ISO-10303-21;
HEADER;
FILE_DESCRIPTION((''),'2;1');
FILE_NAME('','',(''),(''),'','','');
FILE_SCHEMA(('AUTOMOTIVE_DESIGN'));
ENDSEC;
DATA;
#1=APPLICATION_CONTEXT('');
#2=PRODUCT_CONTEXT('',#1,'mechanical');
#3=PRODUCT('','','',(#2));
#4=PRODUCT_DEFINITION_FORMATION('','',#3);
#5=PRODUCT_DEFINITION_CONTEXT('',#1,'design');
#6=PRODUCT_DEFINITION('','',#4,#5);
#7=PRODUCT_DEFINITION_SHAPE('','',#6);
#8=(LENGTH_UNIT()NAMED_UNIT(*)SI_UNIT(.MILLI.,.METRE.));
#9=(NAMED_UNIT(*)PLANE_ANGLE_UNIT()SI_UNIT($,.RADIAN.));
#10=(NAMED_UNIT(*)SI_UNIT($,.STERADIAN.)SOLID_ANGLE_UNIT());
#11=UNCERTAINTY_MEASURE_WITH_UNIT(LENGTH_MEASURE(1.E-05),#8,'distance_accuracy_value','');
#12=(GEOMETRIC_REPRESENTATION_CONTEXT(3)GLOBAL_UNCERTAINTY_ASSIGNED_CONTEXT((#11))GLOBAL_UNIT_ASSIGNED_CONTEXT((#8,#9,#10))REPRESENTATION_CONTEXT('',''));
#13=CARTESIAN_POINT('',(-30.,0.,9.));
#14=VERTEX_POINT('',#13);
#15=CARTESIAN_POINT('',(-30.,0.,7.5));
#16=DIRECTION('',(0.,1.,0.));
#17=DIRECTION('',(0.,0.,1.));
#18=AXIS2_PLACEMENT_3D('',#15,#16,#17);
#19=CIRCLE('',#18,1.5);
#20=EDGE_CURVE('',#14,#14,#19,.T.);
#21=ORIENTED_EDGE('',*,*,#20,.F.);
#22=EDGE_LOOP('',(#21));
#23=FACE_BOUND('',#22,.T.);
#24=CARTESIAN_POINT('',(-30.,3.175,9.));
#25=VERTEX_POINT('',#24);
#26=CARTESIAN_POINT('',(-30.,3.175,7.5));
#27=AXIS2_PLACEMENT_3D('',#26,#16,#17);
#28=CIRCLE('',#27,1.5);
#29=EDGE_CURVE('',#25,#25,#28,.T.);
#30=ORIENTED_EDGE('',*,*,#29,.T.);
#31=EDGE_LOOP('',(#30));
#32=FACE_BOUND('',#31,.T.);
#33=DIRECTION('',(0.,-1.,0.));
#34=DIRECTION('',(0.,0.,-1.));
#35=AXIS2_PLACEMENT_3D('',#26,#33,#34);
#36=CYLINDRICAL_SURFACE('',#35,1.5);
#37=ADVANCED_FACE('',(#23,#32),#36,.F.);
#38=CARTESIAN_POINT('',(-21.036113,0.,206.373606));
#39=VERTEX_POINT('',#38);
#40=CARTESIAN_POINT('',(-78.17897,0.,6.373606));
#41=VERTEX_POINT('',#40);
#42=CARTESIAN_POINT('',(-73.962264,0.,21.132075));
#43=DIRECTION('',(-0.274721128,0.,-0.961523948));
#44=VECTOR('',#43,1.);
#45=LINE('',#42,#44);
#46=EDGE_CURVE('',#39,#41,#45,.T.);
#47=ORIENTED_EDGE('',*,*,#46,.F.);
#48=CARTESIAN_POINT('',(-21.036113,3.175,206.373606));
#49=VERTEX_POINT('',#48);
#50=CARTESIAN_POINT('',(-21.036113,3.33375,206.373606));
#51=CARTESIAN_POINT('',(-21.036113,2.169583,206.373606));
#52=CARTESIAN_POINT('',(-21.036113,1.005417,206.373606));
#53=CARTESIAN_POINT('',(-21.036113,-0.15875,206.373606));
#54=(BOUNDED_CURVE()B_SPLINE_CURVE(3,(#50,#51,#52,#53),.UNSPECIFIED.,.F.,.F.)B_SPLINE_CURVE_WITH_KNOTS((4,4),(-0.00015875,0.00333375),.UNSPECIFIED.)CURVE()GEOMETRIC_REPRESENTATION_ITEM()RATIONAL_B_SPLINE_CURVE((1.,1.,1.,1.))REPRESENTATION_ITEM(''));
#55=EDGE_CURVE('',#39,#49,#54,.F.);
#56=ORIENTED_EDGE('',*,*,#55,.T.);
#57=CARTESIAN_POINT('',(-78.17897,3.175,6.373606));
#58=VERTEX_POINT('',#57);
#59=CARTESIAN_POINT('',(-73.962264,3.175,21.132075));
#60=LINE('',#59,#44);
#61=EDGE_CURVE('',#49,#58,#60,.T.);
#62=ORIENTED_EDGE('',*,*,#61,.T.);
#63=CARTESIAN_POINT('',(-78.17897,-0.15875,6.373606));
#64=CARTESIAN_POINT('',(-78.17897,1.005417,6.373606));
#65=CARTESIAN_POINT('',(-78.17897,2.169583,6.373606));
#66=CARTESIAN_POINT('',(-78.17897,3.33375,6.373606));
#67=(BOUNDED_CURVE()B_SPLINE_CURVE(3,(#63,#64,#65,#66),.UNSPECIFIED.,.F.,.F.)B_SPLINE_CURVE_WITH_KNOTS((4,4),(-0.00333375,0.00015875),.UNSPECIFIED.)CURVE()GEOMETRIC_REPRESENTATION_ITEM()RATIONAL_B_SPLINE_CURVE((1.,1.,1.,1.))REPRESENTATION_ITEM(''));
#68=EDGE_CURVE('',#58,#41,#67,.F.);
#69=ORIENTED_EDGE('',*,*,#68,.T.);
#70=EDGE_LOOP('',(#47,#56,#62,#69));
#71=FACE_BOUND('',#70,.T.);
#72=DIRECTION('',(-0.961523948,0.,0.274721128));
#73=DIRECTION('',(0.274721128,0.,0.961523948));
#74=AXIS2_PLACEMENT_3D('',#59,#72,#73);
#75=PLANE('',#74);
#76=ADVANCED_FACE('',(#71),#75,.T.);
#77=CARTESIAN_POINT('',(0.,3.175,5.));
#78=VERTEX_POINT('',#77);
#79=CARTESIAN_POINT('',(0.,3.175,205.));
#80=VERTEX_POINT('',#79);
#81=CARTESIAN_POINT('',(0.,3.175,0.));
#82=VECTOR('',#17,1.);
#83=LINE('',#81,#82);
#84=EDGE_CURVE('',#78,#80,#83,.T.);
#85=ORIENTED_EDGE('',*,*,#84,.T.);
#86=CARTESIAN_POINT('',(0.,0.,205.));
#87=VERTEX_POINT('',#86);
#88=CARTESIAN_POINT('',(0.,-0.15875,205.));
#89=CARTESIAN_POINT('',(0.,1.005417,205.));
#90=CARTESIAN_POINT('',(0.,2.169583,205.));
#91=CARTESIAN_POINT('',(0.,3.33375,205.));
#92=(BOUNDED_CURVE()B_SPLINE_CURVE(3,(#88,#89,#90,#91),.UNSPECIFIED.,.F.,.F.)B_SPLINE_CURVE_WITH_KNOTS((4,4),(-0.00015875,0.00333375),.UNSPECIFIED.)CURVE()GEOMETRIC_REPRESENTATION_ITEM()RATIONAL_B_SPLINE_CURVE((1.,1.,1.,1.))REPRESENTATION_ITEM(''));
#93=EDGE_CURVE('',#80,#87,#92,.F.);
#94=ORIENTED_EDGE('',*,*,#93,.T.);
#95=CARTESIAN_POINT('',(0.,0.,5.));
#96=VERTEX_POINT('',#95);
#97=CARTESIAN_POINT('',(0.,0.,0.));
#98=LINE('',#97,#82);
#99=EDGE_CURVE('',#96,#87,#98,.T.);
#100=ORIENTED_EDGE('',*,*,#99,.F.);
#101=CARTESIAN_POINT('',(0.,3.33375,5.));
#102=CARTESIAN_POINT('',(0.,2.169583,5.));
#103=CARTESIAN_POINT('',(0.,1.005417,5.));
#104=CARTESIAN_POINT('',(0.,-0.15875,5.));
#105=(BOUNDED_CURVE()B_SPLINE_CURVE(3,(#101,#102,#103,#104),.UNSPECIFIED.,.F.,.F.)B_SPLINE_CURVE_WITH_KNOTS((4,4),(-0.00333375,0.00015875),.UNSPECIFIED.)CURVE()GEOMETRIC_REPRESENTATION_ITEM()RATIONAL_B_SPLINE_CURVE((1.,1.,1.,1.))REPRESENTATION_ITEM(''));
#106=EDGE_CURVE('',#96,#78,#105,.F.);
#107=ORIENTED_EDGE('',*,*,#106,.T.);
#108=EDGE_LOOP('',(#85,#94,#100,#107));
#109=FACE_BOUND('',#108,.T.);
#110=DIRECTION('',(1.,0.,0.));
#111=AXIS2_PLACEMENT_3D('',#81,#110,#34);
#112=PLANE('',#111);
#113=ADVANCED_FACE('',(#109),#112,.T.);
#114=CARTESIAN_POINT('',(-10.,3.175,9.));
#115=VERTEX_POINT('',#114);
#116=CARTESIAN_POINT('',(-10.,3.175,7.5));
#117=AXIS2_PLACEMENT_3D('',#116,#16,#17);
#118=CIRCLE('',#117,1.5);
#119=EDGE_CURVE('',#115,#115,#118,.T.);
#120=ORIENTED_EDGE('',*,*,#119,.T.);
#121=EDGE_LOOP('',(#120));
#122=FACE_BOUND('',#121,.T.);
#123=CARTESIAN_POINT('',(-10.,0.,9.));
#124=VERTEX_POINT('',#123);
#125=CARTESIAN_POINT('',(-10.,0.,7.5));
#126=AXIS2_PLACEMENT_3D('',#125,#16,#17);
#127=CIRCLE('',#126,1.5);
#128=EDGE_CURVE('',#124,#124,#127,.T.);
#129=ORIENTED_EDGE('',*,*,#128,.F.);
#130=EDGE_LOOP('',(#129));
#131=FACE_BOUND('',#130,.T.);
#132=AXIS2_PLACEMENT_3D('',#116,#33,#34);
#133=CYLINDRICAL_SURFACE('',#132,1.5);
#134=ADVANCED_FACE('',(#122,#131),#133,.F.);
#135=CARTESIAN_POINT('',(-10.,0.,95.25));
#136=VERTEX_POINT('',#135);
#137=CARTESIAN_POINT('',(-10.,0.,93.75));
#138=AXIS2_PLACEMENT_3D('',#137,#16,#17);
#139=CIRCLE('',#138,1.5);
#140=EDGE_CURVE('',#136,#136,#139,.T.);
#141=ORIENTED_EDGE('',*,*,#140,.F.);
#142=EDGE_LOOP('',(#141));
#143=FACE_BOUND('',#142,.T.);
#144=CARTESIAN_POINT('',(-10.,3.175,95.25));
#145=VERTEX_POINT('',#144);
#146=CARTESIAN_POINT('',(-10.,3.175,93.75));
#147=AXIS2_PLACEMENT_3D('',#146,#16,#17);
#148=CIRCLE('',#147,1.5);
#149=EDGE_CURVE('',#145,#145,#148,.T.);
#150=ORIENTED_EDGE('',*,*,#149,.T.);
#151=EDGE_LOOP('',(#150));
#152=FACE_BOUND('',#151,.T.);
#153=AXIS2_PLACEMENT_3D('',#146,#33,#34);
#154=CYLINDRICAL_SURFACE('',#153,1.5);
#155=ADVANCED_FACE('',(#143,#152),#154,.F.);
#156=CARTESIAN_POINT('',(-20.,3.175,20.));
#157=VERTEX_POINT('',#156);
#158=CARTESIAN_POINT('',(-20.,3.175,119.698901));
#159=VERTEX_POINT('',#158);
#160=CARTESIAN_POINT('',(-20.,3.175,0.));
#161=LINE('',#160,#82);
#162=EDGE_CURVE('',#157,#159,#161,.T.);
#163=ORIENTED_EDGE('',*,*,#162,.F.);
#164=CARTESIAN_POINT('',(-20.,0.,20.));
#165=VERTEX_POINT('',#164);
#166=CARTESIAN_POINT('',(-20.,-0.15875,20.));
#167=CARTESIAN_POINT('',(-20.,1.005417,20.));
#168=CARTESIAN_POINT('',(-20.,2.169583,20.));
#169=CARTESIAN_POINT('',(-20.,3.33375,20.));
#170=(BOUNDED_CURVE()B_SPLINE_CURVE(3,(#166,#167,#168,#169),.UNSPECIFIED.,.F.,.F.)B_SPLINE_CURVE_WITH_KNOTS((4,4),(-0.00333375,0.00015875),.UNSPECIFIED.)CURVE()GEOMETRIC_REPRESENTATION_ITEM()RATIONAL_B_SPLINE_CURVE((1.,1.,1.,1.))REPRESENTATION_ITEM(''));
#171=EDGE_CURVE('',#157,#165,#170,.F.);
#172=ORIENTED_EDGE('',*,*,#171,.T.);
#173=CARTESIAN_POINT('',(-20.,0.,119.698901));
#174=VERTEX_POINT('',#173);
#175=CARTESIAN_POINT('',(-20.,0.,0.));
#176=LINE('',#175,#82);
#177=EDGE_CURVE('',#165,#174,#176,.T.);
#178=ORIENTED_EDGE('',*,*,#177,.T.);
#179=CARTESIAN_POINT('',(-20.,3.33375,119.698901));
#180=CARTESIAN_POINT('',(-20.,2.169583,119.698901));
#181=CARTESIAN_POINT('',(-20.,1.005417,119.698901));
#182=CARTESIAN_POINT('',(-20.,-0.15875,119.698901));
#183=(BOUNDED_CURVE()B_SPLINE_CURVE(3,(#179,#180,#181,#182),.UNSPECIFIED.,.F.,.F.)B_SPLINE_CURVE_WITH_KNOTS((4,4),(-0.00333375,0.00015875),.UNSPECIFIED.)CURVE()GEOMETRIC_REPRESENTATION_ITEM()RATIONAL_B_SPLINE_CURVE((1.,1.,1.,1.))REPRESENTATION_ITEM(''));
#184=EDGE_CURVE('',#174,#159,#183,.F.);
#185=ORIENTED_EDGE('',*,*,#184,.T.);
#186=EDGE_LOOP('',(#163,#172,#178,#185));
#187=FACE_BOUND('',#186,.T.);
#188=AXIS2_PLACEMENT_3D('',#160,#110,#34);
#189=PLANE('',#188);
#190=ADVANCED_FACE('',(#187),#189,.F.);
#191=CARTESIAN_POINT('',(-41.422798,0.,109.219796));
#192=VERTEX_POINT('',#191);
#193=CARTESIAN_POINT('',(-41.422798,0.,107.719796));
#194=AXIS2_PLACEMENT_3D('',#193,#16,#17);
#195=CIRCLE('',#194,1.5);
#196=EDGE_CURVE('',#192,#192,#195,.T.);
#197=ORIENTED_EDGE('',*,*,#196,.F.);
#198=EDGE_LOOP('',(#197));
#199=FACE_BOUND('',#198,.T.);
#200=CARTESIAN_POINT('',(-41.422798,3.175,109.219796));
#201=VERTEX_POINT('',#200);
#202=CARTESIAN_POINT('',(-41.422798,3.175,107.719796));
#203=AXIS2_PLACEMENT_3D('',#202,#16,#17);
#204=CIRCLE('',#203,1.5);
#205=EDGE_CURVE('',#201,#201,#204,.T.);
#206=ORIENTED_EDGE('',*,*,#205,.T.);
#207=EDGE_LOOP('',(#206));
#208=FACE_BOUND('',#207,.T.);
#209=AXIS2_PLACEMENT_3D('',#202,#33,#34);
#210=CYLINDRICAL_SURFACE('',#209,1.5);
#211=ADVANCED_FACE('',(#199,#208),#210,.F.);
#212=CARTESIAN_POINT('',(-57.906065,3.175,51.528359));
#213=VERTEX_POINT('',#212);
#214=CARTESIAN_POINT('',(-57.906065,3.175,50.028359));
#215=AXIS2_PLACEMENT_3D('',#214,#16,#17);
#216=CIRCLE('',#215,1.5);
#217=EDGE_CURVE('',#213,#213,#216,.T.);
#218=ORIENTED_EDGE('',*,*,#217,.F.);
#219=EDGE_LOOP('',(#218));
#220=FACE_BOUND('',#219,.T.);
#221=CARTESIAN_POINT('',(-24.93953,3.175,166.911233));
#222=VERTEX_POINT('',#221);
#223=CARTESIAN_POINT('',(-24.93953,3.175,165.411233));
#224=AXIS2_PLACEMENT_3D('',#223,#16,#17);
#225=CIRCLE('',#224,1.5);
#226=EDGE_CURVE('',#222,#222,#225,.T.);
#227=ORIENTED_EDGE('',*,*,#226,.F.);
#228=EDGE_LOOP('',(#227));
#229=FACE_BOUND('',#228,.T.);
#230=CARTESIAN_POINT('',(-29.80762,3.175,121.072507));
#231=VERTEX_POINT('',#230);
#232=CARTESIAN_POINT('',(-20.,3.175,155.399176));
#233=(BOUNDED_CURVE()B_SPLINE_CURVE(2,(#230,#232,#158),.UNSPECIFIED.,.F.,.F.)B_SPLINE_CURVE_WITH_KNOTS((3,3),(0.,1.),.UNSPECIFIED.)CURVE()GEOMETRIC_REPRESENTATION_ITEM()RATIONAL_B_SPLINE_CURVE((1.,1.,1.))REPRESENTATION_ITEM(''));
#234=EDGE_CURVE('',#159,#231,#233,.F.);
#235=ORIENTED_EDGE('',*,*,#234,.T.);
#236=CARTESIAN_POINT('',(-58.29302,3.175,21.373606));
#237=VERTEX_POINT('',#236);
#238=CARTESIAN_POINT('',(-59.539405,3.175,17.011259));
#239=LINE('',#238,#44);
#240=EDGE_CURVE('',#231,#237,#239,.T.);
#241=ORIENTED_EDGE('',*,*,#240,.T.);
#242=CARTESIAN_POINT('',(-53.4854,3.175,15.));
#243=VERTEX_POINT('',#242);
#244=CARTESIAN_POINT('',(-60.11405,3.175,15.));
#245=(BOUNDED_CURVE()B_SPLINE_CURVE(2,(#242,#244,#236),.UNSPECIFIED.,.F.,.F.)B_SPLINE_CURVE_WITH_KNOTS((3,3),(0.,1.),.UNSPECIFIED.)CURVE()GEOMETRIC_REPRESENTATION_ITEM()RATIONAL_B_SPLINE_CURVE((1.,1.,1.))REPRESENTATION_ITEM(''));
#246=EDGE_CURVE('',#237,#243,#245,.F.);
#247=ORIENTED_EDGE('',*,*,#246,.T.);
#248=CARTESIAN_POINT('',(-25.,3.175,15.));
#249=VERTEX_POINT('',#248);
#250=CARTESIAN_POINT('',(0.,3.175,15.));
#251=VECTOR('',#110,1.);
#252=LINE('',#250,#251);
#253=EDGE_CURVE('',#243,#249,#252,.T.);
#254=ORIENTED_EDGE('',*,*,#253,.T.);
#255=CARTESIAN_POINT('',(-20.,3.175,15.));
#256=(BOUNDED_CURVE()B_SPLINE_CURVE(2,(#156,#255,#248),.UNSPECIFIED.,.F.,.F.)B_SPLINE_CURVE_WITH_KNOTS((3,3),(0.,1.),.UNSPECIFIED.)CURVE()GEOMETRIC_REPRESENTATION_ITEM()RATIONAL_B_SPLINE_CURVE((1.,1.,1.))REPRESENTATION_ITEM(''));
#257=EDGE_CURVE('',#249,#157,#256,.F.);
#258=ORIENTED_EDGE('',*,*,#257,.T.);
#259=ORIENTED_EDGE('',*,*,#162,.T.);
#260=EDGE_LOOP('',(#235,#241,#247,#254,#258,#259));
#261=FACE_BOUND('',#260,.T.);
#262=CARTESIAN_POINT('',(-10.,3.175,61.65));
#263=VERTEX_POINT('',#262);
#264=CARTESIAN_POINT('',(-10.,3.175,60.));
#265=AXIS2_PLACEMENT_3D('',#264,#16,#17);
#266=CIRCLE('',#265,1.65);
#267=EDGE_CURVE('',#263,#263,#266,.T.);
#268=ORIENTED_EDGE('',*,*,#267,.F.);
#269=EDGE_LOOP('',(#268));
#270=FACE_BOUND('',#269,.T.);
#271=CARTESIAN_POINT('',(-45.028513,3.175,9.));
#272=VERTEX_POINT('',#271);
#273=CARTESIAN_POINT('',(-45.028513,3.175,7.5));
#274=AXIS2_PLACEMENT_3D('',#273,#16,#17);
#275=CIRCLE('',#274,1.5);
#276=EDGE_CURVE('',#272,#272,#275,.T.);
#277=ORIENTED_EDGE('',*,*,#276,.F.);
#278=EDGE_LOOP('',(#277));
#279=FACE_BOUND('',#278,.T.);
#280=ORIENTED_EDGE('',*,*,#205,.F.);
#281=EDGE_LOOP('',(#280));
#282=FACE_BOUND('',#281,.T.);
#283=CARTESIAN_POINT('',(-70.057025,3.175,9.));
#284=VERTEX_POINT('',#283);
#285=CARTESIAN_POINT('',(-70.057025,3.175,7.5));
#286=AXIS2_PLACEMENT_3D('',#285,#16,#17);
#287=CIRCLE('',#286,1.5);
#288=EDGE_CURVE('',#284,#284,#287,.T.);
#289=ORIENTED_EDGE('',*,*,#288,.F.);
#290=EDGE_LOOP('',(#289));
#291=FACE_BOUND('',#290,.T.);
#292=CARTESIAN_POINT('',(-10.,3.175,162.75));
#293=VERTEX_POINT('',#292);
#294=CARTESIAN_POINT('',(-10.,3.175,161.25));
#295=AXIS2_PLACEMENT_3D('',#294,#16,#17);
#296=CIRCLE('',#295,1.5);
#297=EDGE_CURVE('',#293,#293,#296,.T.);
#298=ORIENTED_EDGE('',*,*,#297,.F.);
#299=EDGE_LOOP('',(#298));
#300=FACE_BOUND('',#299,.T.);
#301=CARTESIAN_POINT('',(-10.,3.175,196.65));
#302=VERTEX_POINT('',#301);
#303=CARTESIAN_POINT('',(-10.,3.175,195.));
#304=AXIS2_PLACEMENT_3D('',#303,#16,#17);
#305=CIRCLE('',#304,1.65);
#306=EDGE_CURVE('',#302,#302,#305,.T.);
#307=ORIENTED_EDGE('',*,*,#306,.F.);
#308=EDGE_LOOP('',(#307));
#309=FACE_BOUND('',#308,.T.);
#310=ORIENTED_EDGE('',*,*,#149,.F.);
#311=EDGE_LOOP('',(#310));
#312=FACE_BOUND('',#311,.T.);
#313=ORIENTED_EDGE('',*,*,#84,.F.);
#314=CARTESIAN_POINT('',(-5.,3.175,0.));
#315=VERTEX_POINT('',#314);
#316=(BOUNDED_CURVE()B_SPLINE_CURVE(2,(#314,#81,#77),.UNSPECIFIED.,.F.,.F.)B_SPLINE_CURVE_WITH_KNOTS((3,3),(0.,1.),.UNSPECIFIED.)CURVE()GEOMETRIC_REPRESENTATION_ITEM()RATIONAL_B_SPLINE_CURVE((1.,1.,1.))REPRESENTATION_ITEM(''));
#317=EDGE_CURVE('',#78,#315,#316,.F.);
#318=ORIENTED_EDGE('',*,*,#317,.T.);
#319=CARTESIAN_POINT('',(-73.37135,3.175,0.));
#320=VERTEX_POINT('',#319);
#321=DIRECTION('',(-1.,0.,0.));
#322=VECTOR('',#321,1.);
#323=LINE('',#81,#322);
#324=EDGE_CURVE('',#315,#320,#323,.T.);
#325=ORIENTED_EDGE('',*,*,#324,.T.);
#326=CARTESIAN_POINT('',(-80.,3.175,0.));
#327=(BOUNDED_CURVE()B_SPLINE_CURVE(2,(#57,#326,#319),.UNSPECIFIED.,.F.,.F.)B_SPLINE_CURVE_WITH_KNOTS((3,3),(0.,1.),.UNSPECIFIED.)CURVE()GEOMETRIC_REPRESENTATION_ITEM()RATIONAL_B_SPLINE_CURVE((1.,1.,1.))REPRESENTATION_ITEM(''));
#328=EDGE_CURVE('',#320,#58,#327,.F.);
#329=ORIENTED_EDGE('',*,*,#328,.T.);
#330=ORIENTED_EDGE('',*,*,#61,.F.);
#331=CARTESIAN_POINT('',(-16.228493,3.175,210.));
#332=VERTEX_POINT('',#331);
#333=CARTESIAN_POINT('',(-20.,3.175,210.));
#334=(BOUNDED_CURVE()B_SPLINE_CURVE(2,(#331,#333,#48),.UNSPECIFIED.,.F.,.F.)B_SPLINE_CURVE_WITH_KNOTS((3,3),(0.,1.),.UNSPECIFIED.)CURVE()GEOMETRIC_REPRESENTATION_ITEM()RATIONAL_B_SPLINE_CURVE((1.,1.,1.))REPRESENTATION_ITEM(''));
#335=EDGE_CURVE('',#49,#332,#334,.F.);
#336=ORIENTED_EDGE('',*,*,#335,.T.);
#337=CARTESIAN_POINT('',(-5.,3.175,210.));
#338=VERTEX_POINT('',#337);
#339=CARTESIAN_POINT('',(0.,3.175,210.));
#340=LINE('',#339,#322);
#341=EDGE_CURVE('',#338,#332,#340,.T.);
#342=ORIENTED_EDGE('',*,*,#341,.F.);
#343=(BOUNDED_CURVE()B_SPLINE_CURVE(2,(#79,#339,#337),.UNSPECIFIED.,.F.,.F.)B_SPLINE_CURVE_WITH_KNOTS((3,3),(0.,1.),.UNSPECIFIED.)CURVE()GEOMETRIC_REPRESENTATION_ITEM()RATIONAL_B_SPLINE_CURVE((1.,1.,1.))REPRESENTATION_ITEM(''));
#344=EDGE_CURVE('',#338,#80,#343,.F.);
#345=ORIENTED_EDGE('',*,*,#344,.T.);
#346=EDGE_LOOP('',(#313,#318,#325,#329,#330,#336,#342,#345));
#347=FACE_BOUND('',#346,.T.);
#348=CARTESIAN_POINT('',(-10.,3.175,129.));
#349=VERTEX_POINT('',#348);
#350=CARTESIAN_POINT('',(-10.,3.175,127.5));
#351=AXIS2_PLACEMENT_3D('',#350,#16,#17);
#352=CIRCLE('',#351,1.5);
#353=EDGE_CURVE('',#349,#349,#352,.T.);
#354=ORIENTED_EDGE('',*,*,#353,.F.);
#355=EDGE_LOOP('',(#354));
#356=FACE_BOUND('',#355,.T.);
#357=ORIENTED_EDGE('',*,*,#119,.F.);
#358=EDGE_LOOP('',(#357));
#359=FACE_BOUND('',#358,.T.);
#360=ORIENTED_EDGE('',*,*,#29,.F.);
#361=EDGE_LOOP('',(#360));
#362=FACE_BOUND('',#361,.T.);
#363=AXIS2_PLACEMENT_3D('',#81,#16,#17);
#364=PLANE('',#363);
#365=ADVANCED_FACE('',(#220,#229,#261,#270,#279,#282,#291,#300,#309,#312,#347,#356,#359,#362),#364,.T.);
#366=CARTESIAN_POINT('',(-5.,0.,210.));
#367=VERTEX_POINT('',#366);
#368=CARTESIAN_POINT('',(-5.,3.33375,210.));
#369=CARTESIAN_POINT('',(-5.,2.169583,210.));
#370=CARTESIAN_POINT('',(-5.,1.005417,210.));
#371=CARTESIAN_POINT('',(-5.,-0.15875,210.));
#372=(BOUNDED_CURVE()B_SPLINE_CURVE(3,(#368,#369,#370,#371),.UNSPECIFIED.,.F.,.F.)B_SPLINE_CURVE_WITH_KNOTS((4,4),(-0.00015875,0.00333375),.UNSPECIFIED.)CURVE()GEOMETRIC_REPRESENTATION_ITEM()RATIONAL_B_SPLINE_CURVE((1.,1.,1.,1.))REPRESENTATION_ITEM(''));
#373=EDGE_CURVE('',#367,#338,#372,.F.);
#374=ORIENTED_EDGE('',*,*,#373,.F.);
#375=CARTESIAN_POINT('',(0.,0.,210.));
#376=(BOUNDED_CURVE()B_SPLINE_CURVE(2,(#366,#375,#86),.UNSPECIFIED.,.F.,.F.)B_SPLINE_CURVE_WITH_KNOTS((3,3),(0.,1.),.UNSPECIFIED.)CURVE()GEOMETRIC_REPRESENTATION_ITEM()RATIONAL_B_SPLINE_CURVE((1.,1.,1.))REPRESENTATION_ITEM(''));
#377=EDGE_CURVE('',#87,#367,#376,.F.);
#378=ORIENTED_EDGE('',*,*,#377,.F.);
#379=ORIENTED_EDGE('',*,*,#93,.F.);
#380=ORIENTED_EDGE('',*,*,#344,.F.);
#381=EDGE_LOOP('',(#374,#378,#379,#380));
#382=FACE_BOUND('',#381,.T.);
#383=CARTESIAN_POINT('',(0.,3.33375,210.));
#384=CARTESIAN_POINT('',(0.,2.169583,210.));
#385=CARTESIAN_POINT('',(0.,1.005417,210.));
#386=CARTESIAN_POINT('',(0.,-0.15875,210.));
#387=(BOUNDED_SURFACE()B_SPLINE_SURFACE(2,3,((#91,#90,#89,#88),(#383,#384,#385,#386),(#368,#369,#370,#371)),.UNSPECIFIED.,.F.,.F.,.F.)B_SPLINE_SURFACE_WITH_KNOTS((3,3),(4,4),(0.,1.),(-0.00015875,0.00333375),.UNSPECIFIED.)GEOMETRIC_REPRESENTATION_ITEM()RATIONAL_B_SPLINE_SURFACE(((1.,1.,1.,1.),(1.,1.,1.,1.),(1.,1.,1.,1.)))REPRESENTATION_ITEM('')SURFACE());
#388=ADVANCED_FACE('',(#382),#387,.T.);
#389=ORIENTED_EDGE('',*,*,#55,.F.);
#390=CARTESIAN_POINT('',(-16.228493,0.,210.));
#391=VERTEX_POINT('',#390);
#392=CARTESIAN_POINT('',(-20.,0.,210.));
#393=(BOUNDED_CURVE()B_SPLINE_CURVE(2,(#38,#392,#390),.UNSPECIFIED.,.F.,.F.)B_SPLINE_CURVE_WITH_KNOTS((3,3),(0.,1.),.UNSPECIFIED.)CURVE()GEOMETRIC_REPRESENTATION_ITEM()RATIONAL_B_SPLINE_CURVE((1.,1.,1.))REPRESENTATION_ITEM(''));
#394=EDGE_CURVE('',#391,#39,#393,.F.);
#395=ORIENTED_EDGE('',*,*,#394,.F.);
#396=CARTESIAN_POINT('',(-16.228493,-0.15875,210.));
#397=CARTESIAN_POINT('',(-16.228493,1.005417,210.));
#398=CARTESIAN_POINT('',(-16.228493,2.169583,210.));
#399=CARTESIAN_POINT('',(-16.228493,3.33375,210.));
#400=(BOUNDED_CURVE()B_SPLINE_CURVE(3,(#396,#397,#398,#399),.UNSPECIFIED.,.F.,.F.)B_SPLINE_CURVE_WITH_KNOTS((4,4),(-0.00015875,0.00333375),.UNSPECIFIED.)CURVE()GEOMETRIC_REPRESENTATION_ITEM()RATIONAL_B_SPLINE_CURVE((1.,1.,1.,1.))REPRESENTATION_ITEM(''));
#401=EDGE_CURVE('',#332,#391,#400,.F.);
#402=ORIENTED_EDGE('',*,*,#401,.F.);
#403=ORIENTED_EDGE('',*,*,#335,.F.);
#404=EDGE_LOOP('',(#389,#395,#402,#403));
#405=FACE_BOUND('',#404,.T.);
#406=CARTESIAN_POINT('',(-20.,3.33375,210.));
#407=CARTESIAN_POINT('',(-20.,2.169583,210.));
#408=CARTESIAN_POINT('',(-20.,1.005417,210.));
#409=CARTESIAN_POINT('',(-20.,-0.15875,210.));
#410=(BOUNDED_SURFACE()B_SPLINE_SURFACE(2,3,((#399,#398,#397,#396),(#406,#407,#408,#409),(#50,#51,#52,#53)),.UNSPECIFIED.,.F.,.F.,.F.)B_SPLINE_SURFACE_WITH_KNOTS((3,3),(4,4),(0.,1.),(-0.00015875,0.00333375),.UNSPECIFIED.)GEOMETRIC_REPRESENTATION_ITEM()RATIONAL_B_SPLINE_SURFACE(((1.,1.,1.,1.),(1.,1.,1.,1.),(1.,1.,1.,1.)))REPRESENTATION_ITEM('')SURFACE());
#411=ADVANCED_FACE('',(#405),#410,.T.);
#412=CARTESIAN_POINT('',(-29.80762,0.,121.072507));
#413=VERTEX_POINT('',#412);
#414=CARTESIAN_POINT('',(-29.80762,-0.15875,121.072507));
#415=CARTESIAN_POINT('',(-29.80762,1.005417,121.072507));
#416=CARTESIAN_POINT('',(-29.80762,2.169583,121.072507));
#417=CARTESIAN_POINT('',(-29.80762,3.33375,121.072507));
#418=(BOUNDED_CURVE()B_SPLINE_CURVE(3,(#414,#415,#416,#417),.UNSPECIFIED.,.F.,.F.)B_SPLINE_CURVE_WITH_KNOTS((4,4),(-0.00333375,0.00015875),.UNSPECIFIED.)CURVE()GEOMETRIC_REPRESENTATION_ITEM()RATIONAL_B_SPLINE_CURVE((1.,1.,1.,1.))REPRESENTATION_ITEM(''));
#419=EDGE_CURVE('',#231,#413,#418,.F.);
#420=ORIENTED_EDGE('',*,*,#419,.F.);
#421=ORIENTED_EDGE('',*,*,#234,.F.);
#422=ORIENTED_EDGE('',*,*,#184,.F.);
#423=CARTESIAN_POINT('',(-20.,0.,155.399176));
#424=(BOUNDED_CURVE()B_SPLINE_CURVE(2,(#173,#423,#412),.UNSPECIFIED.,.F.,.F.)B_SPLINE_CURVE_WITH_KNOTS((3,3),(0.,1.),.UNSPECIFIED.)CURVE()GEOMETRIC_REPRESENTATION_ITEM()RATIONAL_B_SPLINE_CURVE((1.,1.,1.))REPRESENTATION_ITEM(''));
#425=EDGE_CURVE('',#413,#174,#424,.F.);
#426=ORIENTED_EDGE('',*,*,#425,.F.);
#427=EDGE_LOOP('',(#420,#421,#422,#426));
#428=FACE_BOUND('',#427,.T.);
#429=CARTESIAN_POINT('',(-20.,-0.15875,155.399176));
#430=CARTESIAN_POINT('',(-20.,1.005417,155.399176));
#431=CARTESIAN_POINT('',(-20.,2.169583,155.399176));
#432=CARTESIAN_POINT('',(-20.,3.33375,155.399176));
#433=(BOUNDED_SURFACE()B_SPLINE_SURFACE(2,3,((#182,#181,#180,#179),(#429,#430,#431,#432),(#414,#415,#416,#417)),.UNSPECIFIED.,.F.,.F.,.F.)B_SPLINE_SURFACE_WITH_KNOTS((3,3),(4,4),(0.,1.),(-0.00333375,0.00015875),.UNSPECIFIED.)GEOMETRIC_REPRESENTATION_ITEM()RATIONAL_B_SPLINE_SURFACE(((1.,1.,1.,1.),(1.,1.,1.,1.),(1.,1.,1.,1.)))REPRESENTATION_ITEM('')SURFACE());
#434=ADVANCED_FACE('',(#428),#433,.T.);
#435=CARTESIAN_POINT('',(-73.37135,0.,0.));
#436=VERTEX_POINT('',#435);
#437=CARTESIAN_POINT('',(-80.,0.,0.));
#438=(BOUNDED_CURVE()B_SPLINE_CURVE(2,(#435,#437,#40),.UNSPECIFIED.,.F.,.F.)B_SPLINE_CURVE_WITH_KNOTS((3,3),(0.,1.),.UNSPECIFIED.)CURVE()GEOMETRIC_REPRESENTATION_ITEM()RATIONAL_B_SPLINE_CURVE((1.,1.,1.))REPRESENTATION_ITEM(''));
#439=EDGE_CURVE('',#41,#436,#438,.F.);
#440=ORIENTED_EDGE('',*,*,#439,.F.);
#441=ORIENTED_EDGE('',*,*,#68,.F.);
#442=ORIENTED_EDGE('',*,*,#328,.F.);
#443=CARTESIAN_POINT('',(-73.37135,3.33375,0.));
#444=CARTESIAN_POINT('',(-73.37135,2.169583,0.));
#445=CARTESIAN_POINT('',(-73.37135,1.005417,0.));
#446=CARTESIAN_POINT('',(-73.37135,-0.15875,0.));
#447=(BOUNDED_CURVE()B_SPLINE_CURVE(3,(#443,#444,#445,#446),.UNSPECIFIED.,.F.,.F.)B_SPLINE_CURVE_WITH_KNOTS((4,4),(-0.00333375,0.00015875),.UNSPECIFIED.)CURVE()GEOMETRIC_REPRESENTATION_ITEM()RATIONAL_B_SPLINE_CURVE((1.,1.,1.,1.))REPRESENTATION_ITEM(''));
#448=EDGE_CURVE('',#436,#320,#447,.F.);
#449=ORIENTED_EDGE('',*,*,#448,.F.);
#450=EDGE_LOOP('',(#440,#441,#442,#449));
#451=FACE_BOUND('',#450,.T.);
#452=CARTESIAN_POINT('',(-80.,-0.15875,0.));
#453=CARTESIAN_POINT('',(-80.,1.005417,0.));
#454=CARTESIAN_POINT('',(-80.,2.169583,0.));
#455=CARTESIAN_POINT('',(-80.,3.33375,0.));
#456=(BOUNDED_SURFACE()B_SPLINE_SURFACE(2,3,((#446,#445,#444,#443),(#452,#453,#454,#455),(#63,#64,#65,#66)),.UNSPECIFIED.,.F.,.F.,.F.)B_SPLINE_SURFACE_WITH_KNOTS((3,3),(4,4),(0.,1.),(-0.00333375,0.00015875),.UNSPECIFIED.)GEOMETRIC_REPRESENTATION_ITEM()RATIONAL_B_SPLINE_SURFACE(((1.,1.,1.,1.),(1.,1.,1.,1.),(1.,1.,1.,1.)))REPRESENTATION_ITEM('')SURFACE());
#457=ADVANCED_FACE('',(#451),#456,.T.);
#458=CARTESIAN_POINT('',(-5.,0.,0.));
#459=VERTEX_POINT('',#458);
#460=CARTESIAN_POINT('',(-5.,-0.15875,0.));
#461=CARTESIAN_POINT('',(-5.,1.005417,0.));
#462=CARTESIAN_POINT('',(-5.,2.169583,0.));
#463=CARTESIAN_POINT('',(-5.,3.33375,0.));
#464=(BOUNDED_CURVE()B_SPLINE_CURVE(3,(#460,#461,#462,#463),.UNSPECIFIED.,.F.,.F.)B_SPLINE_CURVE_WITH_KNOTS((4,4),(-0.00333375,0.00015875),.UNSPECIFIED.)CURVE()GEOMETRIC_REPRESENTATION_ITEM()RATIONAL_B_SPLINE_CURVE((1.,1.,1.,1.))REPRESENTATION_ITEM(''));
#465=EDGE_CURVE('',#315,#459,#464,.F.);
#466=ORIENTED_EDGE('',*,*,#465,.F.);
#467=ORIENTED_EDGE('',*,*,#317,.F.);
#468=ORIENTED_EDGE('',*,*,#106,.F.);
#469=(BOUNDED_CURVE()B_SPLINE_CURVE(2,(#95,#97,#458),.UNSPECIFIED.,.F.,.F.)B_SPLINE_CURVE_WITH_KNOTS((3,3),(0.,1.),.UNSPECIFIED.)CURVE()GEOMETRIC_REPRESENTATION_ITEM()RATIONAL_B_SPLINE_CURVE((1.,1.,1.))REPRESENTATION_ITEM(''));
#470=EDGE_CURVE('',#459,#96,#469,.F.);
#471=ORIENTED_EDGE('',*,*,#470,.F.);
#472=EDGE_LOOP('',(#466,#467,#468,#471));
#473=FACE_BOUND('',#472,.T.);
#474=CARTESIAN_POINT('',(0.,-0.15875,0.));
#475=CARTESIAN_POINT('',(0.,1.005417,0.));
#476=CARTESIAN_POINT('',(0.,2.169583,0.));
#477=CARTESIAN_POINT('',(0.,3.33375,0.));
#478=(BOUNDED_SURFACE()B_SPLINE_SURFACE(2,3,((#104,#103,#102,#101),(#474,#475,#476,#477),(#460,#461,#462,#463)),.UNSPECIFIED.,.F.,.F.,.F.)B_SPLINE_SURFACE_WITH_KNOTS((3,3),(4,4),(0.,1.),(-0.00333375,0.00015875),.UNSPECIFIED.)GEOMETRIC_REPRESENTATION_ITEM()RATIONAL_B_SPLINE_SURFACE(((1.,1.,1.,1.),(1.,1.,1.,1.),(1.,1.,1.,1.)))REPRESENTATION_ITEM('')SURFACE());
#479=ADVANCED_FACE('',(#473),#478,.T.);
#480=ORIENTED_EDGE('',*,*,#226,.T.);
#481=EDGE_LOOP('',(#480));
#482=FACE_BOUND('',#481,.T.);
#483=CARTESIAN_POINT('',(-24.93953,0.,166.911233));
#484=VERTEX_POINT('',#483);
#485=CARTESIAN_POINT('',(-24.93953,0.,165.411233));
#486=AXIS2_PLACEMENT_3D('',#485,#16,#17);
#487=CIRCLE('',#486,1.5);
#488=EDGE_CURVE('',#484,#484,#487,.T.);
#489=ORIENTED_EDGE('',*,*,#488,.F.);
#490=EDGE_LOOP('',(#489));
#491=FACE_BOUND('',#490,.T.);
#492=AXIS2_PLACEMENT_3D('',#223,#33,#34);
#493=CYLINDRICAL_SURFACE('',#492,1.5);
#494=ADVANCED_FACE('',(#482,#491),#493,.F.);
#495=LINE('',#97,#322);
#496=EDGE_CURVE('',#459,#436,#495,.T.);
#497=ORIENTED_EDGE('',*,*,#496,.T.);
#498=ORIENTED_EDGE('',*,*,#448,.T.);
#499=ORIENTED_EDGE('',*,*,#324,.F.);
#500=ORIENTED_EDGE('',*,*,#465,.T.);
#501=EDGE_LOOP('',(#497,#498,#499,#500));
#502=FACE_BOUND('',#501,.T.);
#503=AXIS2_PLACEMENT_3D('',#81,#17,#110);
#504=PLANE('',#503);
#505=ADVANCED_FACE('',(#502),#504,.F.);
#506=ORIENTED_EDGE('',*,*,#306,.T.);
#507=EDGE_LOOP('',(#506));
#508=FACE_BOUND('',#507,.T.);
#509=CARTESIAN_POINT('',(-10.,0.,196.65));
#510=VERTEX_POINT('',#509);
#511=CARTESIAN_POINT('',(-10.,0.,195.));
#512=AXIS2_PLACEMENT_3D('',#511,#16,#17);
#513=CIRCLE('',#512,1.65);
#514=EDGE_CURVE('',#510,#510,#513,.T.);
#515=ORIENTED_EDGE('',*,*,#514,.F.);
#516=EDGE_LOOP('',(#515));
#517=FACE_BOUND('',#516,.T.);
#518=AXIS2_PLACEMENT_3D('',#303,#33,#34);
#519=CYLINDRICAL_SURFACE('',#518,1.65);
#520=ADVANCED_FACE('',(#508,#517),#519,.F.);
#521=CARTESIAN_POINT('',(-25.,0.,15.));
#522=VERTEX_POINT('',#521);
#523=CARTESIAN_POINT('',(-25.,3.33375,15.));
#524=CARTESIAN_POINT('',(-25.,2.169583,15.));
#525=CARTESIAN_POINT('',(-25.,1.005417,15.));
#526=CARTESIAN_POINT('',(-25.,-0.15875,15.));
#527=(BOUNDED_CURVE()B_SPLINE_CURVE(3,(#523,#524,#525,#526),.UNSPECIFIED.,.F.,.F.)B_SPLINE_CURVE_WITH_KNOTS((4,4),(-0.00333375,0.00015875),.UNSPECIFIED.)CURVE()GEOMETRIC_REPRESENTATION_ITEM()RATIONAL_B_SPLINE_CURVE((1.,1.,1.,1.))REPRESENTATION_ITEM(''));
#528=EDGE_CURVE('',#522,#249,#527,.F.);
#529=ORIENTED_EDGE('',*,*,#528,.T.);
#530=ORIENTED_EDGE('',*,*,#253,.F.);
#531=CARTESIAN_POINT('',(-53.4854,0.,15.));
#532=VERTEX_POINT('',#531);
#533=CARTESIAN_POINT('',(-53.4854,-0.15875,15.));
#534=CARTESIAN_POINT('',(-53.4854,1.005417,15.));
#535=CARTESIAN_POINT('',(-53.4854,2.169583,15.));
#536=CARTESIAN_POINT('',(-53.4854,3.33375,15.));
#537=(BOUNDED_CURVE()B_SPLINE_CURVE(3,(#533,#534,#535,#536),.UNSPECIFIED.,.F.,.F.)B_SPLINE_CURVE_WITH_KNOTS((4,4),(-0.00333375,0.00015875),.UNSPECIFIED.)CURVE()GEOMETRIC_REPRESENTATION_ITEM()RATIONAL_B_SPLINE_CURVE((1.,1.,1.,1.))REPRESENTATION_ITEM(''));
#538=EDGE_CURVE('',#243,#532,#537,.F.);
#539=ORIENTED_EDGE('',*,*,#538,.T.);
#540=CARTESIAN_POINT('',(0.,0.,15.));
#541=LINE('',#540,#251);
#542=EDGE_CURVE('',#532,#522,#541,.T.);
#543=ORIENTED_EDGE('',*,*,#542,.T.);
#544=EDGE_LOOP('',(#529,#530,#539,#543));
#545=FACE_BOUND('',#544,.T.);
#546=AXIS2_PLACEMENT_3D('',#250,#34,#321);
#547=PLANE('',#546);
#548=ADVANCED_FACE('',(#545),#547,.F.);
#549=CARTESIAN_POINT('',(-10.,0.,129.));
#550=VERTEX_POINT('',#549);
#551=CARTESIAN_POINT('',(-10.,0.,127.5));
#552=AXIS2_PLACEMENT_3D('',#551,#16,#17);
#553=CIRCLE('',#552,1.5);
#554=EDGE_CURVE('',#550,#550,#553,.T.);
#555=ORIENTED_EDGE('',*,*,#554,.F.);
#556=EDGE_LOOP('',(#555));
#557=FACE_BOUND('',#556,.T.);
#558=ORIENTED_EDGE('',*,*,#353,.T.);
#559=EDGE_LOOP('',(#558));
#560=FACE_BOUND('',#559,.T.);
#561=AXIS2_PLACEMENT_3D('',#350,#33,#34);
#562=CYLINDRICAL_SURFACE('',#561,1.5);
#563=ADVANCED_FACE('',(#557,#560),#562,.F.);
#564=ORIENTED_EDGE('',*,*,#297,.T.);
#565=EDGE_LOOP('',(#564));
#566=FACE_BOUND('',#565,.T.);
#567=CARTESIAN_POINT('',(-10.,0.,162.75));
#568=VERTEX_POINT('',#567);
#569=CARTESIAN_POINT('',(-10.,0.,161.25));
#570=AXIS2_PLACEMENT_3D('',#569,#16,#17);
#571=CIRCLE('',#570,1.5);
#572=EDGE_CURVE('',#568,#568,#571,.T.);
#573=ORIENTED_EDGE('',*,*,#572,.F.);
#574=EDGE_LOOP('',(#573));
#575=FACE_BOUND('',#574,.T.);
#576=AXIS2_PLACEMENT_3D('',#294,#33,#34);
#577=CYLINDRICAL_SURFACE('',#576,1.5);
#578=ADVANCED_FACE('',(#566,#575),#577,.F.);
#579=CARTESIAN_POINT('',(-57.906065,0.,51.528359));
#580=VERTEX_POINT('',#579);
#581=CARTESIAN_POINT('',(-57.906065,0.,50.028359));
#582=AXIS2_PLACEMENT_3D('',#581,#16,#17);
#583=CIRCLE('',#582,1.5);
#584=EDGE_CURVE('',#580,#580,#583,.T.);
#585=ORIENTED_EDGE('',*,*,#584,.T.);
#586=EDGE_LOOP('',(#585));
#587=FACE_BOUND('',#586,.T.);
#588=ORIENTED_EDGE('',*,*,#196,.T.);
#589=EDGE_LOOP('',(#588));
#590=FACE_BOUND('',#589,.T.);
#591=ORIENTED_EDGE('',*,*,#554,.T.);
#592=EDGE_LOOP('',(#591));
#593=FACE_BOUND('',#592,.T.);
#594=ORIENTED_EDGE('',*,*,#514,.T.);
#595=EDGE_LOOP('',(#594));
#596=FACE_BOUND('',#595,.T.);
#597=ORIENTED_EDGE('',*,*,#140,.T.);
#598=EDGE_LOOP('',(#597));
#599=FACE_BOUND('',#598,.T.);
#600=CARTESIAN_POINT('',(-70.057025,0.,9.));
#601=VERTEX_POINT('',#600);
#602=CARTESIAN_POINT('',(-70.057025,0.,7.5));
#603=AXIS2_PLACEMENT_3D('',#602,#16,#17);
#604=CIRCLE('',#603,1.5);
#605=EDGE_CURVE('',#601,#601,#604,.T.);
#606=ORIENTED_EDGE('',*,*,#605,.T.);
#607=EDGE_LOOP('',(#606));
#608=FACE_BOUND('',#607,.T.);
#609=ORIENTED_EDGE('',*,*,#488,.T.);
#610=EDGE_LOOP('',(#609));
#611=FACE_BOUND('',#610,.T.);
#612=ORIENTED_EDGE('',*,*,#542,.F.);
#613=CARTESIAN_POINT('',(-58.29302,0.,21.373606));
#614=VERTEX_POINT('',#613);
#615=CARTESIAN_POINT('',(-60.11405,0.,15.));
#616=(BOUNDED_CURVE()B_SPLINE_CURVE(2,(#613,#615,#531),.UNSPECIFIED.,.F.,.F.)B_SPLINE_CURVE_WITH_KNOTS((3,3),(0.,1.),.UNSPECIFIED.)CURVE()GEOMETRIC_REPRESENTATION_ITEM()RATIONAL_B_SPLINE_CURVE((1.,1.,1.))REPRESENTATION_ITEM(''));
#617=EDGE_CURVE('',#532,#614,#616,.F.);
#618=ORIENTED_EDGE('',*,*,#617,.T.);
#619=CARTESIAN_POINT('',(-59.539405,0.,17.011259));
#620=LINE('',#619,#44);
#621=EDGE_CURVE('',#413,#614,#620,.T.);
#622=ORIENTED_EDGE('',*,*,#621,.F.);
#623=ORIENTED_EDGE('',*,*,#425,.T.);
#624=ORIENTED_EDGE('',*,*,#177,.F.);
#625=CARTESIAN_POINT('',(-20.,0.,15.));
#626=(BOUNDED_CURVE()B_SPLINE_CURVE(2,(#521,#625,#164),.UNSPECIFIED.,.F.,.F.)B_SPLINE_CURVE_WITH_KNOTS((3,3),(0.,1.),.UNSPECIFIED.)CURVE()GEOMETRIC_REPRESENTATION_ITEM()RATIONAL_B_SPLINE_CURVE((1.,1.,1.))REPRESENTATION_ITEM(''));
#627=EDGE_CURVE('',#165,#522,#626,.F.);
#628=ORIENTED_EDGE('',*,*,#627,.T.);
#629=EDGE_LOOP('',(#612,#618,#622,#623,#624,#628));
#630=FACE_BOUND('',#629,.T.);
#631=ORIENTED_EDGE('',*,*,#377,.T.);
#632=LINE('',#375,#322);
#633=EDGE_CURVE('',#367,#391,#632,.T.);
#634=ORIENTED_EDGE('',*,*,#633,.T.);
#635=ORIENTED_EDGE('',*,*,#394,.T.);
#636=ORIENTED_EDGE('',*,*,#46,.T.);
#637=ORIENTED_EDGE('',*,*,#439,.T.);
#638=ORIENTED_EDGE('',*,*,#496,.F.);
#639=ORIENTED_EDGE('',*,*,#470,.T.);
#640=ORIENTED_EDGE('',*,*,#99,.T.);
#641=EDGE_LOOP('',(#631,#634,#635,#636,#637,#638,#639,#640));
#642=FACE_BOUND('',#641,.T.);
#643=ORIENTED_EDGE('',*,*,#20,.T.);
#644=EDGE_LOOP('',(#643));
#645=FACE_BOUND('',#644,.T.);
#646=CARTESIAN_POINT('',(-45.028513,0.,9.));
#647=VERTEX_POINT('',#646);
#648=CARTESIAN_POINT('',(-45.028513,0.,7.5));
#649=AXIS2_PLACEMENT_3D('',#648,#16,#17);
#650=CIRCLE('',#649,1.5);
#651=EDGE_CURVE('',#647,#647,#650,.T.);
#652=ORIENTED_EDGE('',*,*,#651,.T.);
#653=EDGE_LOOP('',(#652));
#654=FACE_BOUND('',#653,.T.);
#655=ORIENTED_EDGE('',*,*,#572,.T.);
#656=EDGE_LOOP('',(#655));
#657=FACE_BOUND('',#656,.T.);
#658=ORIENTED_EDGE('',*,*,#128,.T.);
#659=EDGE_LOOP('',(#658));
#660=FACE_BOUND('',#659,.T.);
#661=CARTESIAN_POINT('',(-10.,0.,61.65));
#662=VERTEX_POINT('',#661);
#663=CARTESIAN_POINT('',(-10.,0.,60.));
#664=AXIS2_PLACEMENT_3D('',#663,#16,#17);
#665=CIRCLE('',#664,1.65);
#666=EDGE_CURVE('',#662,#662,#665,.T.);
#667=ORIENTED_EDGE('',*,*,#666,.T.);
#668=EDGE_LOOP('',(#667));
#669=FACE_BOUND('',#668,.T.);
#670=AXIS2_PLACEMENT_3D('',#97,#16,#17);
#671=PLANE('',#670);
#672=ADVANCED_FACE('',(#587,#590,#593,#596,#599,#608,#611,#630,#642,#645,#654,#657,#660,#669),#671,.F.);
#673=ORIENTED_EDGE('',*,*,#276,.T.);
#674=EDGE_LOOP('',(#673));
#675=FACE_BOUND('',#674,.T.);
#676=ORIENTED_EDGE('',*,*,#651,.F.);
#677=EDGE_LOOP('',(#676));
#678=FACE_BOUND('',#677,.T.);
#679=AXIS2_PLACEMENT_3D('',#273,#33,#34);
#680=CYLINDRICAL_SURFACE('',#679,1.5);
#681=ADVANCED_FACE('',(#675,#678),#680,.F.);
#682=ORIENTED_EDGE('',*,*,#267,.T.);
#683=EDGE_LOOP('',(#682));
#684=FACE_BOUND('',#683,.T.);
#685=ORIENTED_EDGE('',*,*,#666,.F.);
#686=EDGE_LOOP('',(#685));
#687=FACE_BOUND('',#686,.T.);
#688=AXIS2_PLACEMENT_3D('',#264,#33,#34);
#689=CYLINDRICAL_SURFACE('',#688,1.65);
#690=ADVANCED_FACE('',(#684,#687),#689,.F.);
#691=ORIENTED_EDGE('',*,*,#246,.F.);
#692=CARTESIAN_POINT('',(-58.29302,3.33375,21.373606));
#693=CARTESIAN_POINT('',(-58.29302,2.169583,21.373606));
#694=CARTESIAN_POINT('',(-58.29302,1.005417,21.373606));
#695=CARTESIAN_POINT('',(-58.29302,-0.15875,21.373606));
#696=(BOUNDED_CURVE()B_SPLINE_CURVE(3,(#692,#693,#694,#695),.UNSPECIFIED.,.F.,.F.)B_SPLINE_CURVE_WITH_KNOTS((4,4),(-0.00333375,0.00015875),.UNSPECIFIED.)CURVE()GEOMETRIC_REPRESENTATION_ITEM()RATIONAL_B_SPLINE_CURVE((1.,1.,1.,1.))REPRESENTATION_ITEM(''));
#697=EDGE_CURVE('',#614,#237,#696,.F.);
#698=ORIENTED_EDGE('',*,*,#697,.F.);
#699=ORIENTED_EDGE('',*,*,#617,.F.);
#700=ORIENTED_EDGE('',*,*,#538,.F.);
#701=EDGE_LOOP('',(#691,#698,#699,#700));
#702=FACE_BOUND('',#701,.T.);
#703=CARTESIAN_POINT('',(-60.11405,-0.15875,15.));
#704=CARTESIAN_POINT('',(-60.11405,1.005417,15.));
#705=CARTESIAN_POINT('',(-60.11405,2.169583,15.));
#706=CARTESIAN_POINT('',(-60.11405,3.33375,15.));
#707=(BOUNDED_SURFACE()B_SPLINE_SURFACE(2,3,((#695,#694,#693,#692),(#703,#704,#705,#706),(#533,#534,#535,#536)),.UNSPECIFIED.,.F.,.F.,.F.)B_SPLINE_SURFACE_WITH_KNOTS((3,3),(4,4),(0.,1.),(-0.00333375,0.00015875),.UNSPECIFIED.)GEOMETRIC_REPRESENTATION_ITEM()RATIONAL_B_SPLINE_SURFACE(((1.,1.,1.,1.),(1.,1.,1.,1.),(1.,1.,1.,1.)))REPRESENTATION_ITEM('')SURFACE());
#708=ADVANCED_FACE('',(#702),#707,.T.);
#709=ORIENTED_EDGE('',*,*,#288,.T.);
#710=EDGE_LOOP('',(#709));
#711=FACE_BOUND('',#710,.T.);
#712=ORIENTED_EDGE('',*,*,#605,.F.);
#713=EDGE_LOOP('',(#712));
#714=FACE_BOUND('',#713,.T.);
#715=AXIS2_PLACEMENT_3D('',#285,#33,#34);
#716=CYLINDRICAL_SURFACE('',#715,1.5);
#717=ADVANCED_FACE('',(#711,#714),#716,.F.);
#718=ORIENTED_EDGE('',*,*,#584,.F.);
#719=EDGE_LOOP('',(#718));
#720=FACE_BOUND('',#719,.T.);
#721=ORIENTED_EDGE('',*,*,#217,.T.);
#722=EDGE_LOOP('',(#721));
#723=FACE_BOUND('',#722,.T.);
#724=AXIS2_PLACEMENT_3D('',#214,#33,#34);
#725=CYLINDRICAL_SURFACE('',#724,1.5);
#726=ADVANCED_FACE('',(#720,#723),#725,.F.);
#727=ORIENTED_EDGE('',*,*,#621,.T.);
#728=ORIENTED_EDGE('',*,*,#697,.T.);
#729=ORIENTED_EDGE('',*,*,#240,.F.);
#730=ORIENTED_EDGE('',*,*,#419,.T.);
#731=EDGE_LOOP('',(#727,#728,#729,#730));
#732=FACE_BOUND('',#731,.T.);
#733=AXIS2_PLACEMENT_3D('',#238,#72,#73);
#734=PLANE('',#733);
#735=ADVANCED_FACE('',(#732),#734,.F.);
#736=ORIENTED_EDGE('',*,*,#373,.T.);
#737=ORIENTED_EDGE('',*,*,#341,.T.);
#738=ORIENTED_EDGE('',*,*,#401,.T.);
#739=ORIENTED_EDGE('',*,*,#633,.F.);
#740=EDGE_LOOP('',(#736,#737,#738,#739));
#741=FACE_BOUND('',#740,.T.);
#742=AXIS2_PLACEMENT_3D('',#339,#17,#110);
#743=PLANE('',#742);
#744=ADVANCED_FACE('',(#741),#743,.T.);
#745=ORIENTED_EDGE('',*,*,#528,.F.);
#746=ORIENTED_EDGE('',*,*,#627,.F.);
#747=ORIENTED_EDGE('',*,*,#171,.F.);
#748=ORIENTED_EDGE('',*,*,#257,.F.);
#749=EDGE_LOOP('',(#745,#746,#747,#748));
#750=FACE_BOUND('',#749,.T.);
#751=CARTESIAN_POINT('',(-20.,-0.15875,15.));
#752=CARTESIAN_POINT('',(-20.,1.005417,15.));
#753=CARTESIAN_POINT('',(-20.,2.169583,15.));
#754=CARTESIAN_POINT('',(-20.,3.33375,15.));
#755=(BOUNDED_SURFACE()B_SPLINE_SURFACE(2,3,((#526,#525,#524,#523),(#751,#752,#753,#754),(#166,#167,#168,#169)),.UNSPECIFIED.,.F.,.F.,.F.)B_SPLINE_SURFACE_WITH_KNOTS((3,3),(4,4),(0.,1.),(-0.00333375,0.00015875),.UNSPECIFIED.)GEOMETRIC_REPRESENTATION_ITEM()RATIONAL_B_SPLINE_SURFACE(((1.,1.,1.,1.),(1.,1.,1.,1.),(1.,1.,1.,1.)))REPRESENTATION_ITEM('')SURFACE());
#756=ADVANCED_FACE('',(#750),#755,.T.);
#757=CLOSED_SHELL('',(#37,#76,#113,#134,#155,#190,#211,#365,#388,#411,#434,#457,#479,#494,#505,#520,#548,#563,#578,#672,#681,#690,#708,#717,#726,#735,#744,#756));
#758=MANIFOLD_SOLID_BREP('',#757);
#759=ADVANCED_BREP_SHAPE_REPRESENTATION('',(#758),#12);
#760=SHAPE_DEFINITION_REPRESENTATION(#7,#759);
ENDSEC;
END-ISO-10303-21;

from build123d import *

# Parameters (mm, degrees)
SKETCH1_R           = 1.5
SKETCH1_R_2         = 1.65
BOSS_EXTRUDE1_DEPTH = 3.175
FILLET1_SIZE        = 5


with BuildPart() as part:
    # Sketch1 → Boss-Extrude1 (new body)
    with BuildSketch(Plane(origin=(0, 0, 0), x_dir=(1, 0, 0), z_dir=(0, 1, 0))):
        Polygon((-20, -210), (0, -210), (0, 0), (-80, 0), align=None)
        with Locations(Location((-41.422797756, -107.71979577, 0), (0, 0, 270))):
            Circle(SKETCH1_R, mode=Mode.SUBTRACT)
        with Locations(Location((-24.939530082, -165.411232629, 0), (0, 0, 270))):
            Circle(SKETCH1_R, mode=Mode.SUBTRACT)
        with Locations(Location((-10, -195, 0), (0, 0, 270))):
            Circle(SKETCH1_R_2, mode=Mode.SUBTRACT)
        with BuildLine():
            ThreePointArc((-10, -159.75), (-8.5, -161.25), (-10, -162.75))
            ThreePointArc((-10, -162.75), (-11.5, -161.25), (-10, -159.75))
        make_face(mode=Mode.SUBTRACT)
        with BuildLine():
            ThreePointArc((-10, -126), (-8.5, -127.5), (-10, -129))
            ThreePointArc((-10, -129), (-11.5, -127.5), (-10, -126))
        make_face(mode=Mode.SUBTRACT)
        Polygon((-20, -15), (-20, -155.39917583), (-60.114050237, -15), align=None, mode=Mode.SUBTRACT)
        with Locations(Location((-57.90606543, -50.028358912, 0), (0, 0, 270))):
            Circle(SKETCH1_R, mode=Mode.SUBTRACT)
        with Locations(Location((-70.057025119, -7.5, 0), (0, 0, 270))):
            Circle(SKETCH1_R, mode=Mode.SUBTRACT)
        with Locations(Location((-45.028512559, -7.5, 0), (0, 0, 270))):
            Circle(SKETCH1_R, mode=Mode.SUBTRACT)
        with BuildLine():
            ThreePointArc((-10, -92.25), (-8.5, -93.75), (-10, -95.25))
            ThreePointArc((-10, -95.25), (-11.5, -93.75), (-10, -92.25))
        make_face(mode=Mode.SUBTRACT)
        with Locations(Location((-10, -60, 0), (0, 0, 270))):
            Circle(SKETCH1_R_2, mode=Mode.SUBTRACT)
        with Locations(Location((-30, -7.5, 0), (0, 0, 270))):
            Circle(SKETCH1_R, mode=Mode.SUBTRACT)
        with Locations(Location((-10, -7.5, 0), (0, 0, 270))):
            Circle(SKETCH1_R, mode=Mode.SUBTRACT)
    extrude(amount=BOSS_EXTRUDE1_DEPTH)

    # Fillet1
    # a fillet whose section is not a circle: 5 mm, written as the material it adds along each edge
    with BuildSketch(Plane(origin=(-20, 0, 15), x_dir=(0, 0, 1), z_dir=(0, 1, 0))) as fillet1_piece_1:
        with BuildLine():
            Bezier((FILLET1_SIZE, 0), (0, 0), (0, -FILLET1_SIZE), weights=[1, 1, 1])
            Line((0, -FILLET1_SIZE), (0, 0))
            Line((0, 0), (FILLET1_SIZE, 0))
        make_face()
    extrude(amount=3.175)
    with BuildSketch(Plane(origin=(-60.114050237, 0, 15), x_dir=(0.2747211278973786, 0, 0.9615239476408229), z_dir=(0, 1, 0))) as fillet1_piece_2:
        with BuildLine():
            Bezier((6.628649921, 0), (0, 0), (1.821030183, 6.373605639), weights=[1, 1, 1])
            Line((1.821030183, 6.373605639), (0, 0))
            Line((0, 0), (6.628649921, 0))
        make_face()
    extrude(amount=3.175)
    with BuildSketch(Plane(origin=(-20, 0, 155.39917583), x_dir=(-0.274721127897378, 0, -0.961523947640823), z_dir=(0, 1, 0))) as fillet1_piece_3:
        with BuildLine():
            Bezier((35.700274723, 0), (0, 0), (34.326669084, -9.807619738), weights=[1, 1, 1])
            Line((34.326669084, -9.807619738), (0, 0))
            Line((0, 0), (35.700274723, 0))
        make_face()
    extrude(amount=3.175)
    # a fillet whose section is not a circle: 5 mm, written as the material it takes off along each edge
    with BuildSketch(Plane(origin=(-80, -16.571624802, 0), x_dir=(0.2747211278973785, 0, 0.9615239476408229), z_dir=(0, 1, 0))) as fillet1_2_piece_1:
        with BuildLine():
            Bezier((6.628649921, 0), (0, 0), (1.821030183, 6.373605639), weights=[1, 1, 1])
            Line((1.821030183, 6.373605639), (0, 0))
            Line((0, 0), (6.628649921, 0))
        make_face()
    extrude(amount=36.318249605, mode=Mode.SUBTRACT)
    with BuildSketch(Plane(origin=(0, -12.5, 0), x_dir=(-1, 0, 0), z_dir=(0, 1, 0))) as fillet1_2_piece_2:
        with BuildLine():
            Bezier((FILLET1_SIZE, 0), (0, 0), (0, FILLET1_SIZE), weights=[1, 1, 1])
            Line((0, FILLET1_SIZE), (0, 0))
            Line((0, 0), (FILLET1_SIZE, 0))
        make_face()
    extrude(amount=28.175, mode=Mode.SUBTRACT)
    with BuildSketch(Plane(origin=(0, -12.5, 210), x_dir=(-1, 0, 0), z_dir=(0, 1, 0))) as fillet1_2_piece_3:
        with BuildLine():
            Bezier((FILLET1_SIZE, 0), (0, 0), (0, -FILLET1_SIZE), weights=[1, 1, 1])
            Line((0, -FILLET1_SIZE), (0, 0))
            Line((0, 0), (FILLET1_SIZE, 0))
        make_face()
    extrude(amount=28.175, mode=Mode.SUBTRACT)
    with BuildSketch(Plane(origin=(-20, -9.428767659, 210), x_dir=(-0.2747211278973768, 0, -0.9615239476408235), z_dir=(0, 1, 0))) as fillet1_2_piece_4:
        with BuildLine():
            Bezier((3.771507064, 0), (0, 0), (-1.036112674, -3.626394361), weights=[1, 1, 1])
            Line((-1.036112674, -3.626394361), (0, 0))
            Line((0, 0), (3.771507064, 0))
        make_face()
    extrude(amount=22.032535319, mode=Mode.SUBTRACT)


solid = part.part
